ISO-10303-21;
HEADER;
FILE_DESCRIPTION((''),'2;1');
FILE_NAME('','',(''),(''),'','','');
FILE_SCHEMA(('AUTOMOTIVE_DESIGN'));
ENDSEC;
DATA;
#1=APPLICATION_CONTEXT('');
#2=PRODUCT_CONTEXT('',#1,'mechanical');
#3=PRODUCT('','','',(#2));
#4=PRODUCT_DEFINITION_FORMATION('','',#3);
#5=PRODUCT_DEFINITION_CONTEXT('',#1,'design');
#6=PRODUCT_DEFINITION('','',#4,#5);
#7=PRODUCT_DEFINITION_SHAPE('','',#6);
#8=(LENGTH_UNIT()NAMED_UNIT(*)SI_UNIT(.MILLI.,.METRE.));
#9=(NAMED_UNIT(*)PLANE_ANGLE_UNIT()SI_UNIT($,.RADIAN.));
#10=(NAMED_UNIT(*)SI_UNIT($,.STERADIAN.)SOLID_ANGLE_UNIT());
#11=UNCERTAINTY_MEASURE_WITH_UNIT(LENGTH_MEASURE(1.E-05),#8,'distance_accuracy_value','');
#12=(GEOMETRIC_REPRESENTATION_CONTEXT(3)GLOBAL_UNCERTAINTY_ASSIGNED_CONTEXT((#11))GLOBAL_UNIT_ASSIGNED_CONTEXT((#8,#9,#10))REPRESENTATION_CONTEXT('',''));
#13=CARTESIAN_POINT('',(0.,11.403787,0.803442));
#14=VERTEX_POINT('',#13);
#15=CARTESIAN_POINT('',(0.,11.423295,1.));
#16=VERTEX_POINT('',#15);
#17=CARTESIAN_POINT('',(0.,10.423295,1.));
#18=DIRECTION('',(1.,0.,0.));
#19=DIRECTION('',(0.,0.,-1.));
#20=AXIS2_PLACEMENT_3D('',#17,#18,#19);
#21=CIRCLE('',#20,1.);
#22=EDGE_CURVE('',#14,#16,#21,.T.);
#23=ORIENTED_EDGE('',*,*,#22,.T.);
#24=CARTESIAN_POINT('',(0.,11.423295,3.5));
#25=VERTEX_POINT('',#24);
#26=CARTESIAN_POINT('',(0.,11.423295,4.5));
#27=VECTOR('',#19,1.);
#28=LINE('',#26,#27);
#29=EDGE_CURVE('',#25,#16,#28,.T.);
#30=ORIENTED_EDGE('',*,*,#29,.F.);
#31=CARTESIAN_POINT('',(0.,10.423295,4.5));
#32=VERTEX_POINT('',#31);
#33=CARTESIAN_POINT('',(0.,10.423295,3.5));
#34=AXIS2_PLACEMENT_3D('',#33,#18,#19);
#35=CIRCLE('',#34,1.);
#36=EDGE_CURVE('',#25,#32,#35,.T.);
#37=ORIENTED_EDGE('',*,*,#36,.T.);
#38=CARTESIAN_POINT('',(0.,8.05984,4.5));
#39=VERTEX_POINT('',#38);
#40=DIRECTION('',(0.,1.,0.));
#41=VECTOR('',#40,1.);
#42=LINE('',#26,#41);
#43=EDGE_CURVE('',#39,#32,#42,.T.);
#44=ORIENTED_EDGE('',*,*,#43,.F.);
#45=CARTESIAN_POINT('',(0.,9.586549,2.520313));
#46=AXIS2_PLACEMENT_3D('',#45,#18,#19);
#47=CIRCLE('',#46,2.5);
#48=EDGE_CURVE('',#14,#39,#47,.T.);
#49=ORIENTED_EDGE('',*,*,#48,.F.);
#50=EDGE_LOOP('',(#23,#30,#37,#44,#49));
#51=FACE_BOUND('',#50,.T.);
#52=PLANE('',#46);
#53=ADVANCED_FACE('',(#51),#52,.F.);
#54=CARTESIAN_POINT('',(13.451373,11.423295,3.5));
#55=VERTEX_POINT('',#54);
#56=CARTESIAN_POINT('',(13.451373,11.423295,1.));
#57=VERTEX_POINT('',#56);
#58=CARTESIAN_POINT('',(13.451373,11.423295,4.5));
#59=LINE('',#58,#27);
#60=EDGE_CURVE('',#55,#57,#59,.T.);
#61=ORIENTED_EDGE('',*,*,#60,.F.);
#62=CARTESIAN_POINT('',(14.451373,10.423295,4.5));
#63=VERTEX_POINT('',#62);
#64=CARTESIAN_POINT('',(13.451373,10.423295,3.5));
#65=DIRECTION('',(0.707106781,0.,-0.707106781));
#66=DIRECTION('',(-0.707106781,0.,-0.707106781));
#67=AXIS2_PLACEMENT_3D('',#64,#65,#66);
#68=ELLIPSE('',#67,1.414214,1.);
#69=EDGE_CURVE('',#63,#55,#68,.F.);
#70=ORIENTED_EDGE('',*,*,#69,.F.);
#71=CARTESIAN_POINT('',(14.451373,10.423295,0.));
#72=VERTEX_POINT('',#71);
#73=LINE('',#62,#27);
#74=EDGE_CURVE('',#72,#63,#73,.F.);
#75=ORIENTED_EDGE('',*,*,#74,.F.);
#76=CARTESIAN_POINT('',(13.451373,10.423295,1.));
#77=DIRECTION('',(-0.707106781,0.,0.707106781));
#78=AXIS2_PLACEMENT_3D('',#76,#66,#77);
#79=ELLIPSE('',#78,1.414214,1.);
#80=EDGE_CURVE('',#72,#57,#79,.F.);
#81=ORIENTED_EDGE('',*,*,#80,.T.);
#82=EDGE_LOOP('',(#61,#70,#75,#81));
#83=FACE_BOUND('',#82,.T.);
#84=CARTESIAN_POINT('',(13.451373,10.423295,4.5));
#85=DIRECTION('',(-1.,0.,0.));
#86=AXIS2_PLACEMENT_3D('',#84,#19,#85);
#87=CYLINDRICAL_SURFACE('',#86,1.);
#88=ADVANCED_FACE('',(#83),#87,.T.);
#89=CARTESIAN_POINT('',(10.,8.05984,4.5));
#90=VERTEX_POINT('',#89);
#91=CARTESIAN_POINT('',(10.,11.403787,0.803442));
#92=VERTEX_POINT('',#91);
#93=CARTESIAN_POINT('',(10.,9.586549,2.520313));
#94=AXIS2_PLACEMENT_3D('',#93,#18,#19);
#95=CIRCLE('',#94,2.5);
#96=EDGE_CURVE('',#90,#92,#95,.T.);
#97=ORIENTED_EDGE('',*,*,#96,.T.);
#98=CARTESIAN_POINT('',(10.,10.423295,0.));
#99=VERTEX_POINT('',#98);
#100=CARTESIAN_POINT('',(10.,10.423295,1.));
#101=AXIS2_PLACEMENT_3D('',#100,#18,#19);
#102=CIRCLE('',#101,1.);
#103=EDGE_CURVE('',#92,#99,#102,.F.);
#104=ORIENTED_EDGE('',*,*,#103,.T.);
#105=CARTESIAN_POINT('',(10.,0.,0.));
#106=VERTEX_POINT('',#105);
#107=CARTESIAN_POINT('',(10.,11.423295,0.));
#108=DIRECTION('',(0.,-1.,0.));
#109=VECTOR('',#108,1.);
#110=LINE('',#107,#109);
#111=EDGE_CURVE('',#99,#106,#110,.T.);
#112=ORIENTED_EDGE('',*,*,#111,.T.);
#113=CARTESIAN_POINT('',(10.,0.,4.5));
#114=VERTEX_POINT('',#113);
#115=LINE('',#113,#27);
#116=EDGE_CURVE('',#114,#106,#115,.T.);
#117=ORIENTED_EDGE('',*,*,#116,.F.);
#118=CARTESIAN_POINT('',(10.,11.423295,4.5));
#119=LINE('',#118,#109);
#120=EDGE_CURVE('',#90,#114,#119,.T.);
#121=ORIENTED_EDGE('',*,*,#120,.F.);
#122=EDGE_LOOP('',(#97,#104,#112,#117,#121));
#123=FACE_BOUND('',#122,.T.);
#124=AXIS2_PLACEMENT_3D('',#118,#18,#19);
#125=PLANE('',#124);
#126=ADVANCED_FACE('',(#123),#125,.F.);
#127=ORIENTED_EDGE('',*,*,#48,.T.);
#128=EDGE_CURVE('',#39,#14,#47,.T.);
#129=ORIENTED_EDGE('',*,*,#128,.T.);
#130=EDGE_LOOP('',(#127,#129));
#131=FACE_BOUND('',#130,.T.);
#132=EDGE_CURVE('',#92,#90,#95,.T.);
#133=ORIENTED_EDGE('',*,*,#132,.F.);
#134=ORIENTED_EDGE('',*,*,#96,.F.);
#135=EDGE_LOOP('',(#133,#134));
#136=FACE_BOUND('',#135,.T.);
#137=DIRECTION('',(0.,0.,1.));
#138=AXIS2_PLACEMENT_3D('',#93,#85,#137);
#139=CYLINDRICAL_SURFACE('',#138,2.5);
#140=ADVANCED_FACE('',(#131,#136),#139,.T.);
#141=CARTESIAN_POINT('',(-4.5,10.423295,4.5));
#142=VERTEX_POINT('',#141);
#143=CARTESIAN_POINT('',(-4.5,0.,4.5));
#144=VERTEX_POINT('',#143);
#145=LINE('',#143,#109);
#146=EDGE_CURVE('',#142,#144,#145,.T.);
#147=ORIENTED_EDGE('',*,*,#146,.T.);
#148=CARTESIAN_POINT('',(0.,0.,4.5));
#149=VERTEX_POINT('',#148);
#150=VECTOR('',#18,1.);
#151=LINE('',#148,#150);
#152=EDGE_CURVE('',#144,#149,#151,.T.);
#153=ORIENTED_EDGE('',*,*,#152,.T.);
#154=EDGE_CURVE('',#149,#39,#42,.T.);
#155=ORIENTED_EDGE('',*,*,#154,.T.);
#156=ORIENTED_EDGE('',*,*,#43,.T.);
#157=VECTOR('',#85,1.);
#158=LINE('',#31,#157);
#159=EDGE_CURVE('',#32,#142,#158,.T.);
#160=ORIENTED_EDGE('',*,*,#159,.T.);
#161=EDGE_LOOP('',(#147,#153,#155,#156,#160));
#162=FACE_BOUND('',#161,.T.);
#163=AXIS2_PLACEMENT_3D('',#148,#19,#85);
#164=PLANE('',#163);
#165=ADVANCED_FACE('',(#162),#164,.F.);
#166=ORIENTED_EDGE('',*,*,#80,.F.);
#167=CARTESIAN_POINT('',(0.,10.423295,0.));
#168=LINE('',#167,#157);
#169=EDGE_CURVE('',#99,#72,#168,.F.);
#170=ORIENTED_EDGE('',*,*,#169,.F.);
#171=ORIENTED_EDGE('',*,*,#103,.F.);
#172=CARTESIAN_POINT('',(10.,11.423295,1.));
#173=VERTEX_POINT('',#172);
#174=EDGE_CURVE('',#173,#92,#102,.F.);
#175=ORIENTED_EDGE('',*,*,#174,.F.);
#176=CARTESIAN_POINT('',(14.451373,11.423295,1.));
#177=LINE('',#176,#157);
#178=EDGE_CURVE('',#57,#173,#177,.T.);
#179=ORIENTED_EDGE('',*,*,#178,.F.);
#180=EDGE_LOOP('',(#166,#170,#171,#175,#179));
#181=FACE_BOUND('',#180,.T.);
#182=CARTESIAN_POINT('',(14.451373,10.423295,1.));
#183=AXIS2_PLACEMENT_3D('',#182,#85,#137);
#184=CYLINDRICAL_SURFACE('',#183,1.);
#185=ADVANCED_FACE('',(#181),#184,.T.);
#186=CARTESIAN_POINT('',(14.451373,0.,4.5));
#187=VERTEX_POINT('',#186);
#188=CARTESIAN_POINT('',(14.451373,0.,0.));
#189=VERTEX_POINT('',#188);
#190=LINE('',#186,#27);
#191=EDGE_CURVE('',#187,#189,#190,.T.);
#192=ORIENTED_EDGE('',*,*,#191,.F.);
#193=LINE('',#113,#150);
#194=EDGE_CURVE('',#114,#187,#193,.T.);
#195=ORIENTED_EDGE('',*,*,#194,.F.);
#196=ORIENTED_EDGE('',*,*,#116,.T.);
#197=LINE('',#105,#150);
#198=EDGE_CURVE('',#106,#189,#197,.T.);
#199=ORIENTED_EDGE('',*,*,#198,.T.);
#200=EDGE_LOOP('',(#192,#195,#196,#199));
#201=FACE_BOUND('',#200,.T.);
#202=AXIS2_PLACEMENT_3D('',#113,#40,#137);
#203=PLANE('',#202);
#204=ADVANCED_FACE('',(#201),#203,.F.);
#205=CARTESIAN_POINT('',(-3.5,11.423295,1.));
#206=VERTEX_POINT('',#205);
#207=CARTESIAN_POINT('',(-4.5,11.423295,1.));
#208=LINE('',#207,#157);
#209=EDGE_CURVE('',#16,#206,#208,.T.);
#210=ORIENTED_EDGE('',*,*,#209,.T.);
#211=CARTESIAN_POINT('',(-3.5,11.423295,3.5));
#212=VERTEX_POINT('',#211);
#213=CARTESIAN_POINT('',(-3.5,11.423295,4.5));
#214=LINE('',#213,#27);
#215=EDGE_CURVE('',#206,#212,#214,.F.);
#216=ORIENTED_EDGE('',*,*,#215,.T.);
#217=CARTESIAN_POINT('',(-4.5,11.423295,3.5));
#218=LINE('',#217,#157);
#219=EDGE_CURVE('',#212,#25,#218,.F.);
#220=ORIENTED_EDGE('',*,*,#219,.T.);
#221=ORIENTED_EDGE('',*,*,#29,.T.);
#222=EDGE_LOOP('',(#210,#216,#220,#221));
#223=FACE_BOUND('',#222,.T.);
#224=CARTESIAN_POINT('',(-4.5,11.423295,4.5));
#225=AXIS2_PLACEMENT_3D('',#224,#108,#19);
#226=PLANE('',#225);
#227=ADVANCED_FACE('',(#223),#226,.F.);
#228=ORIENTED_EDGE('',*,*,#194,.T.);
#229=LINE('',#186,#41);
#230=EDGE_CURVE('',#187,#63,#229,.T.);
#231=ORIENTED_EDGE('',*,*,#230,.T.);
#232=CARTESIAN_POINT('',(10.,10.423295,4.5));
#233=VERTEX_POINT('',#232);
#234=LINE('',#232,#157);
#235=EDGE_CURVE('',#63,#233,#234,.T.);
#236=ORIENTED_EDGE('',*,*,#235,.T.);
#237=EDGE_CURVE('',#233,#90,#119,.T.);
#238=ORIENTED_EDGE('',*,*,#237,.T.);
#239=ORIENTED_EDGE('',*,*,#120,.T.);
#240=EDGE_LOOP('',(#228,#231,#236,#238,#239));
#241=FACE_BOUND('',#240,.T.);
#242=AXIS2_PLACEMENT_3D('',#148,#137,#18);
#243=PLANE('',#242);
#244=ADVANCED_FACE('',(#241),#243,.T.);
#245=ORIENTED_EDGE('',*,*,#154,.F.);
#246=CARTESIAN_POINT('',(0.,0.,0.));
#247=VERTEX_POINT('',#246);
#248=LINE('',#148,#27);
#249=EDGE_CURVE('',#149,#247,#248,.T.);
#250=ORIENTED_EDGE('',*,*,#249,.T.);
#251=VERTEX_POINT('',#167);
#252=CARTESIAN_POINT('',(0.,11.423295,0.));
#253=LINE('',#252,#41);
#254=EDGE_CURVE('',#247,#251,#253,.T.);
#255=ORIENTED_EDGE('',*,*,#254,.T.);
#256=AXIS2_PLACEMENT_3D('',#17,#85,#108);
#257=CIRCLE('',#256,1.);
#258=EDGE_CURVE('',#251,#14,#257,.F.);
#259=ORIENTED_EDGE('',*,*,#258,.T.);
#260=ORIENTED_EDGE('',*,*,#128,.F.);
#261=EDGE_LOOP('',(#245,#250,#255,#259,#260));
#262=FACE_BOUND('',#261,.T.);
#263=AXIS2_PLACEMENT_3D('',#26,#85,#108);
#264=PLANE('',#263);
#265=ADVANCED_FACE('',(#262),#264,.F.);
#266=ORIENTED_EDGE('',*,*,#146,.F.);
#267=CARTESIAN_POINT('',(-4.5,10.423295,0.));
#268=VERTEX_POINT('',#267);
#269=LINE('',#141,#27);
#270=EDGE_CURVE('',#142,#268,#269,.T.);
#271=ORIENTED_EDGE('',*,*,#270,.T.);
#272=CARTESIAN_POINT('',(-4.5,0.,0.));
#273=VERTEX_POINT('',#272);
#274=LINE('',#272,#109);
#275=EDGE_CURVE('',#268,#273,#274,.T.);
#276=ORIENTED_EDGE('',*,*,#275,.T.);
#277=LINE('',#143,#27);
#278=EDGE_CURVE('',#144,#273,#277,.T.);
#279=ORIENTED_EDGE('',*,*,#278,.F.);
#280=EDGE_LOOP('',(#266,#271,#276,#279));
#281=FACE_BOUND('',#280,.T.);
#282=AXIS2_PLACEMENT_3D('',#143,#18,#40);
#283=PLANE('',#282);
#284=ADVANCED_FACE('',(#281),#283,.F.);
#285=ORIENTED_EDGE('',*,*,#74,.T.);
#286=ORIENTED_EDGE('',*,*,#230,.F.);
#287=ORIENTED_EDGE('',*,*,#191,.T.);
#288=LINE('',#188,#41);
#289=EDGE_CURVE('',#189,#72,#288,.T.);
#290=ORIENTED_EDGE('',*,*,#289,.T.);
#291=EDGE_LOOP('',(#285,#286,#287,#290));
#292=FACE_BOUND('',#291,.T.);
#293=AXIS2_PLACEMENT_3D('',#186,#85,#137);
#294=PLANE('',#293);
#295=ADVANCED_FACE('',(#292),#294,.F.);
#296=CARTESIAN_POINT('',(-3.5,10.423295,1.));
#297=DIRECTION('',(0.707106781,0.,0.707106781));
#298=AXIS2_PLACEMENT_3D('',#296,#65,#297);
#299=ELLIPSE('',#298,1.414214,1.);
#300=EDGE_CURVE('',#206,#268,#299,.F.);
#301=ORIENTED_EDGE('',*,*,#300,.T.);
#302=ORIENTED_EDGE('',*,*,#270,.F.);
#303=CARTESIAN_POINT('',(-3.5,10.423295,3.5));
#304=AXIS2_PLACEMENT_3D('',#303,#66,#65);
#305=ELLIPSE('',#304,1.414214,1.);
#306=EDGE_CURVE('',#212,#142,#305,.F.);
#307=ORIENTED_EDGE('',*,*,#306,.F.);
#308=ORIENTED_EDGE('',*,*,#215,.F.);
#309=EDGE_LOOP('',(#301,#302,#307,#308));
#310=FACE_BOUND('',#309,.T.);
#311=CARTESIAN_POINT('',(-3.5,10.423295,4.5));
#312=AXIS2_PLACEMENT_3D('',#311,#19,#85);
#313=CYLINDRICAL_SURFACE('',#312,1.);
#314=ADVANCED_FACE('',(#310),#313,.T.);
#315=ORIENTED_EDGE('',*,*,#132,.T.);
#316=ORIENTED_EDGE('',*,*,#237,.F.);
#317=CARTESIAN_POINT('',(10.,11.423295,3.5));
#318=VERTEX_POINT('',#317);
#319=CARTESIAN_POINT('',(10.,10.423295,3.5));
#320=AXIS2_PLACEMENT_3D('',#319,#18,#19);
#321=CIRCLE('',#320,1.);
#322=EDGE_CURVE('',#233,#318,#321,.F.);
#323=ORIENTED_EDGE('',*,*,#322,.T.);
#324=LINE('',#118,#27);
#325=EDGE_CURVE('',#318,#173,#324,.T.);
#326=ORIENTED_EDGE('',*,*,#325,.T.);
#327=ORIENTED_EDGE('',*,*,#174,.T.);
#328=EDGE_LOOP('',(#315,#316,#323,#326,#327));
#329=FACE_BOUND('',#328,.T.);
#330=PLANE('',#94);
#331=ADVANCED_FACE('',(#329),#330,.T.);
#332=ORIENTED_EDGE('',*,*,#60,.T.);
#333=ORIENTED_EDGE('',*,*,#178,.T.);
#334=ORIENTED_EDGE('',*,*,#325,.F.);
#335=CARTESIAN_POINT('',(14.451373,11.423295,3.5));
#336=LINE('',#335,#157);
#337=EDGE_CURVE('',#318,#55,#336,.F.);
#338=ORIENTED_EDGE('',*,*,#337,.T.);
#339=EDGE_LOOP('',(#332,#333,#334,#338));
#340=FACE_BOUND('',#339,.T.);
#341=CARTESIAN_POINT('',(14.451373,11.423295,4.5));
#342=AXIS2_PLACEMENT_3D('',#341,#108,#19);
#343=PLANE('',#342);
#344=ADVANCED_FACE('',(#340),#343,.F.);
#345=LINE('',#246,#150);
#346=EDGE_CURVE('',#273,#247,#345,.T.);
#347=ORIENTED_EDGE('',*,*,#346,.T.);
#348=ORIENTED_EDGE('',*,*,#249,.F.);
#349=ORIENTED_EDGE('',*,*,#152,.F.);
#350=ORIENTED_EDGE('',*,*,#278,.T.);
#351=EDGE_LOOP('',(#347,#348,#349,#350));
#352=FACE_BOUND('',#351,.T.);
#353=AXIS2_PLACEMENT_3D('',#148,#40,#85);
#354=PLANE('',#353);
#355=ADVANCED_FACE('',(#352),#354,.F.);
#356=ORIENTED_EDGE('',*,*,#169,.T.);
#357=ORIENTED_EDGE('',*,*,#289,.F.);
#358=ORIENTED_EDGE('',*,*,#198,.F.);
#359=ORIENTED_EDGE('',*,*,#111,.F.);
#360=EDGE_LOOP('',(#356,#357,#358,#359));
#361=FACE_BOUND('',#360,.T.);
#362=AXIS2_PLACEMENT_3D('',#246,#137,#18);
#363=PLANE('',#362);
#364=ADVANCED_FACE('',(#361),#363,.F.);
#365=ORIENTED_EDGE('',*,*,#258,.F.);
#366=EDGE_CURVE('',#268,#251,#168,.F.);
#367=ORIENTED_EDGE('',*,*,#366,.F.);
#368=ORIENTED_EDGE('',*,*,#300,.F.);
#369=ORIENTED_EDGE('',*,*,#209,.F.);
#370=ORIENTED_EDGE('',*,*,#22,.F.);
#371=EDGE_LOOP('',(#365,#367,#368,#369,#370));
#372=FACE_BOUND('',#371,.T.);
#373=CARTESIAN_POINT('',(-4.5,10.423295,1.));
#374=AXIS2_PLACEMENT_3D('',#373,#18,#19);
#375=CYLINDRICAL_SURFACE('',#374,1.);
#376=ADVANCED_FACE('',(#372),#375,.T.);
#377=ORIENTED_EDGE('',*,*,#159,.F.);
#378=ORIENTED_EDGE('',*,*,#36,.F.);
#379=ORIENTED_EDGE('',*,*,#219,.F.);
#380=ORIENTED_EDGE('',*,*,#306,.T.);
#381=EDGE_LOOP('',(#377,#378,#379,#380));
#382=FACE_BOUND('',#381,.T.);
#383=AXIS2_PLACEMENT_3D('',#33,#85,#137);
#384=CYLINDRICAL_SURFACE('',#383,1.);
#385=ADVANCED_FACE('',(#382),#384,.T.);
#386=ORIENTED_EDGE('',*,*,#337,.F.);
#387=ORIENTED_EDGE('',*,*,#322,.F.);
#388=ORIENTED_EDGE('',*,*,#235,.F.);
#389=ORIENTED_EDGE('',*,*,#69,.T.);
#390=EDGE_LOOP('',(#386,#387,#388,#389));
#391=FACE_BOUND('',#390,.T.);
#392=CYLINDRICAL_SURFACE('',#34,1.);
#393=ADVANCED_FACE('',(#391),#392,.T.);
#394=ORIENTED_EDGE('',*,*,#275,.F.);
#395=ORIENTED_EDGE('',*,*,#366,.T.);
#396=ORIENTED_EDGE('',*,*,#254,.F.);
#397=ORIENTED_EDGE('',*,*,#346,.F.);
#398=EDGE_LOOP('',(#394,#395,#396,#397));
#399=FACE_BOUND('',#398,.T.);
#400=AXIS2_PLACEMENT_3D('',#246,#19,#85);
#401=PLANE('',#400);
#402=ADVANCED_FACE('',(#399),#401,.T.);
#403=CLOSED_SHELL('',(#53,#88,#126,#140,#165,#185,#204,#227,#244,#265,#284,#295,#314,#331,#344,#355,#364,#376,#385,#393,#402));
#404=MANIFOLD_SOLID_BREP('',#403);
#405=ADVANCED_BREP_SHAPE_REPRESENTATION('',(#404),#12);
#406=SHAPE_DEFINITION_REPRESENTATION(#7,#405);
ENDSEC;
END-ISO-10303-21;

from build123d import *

# Parameters (mm, degrees)
SKIZZE1_W                         = 4.5
SKIZZE1_H                         = 11.423295
AUFSATZ_LINEAR_AUSTRAGEN1_DEPTH   = 4.5
SKIZZE1_W_2                       = 4.451373
AUFSATZ_LINEAR_AUSTRAGEN1_2_DEPTH = 4.5
SKIZZE2_R                         = 2.5
AUFSATZ_LINEAR_AUSTRAGEN2_DEPTH   = 10
VERRUNDUNG4_R                     = 1


with BuildPart() as part:
    # Skizze1 → Aufsatz-Linear austragen1 (new body)
    with BuildSketch(Plane.XY):
        with Locations((-2.25, 5.7116475)):
            Rectangle(SKIZZE1_W, SKIZZE1_H)
    extrude(amount=AUFSATZ_LINEAR_AUSTRAGEN1_DEPTH)



with BuildPart() as body_2:
    # Skizze1 → Aufsatz-Linear austragen1 2 (new body)
    with BuildSketch(Plane.XY):
        with Locations((12.2256865, 5.7116475)):
            Rectangle(SKIZZE1_W_2, SKIZZE1_H)
    extrude(amount=AUFSATZ_LINEAR_AUSTRAGEN1_2_DEPTH)


with BuildPart() as part_1:
    add(part.part)

    add(body_2.part)  # Aufsatz-Linear austragen2 merges body 2
    # Skizze2 → Aufsatz-Linear austragen2 (add)
    with BuildSketch(Plane(origin=(0, 0, 0), x_dir=(0, 0, -1), z_dir=(1, 0, 0))):
        with Locations(Location((-2.520313205, 9.586549386, 0), (0, 0, 217.638946457))):
            Circle(SKIZZE2_R)
    extrude(amount=AUFSATZ_LINEAR_AUSTRAGEN2_DEPTH)

    # Verrundung4
    # the kernel refuses this fillet: 1 mm, written as the material it takes off along each edge
    with BuildSketch(Plane(origin=(16.951373, 11.423295, 0), x_dir=(0, 0, 1), z_dir=(-1, 0, 0)), Plane(origin=(16.951373, 11.423295, 4.5), x_dir=(0, -1, 0), z_dir=(-1, 0, 0))) as verrundung4_piece_1:
        with BuildLine():
            CenterArc((VERRUNDUNG4_R, -VERRUNDUNG4_R), VERRUNDUNG4_R, 90, 90)
            Line((0, -VERRUNDUNG4_R), (0, 0))
            Line((0, 0), (VERRUNDUNG4_R, 0))
        make_face()
    extrude(amount=6.951373, mode=Mode.SUBTRACT)
    with BuildSketch(Plane(origin=(14.451373, 11.423295, -2.5), x_dir=(-1, 0, 0), z_dir=(0, 0, 1)), Plane(origin=(-4.5, 11.423295, -2.5), x_dir=(0, -1, 0), z_dir=(0, 0, 1))) as verrundung4_piece_2:
        with BuildLine():
            CenterArc((VERRUNDUNG4_R, VERRUNDUNG4_R), VERRUNDUNG4_R, 180, 90)
            Line((0, VERRUNDUNG4_R), (0, 0))
            Line((0, 0), (VERRUNDUNG4_R, 0))
        make_face()
    extrude(amount=9.5, mode=Mode.SUBTRACT)
    with BuildSketch(Plane(origin=(-7, 11.423295, 0), x_dir=(0, -1, 0), z_dir=(1, 0, 0))) as verrundung4_piece_3:
        with BuildLine():
            CenterArc((VERRUNDUNG4_R, -VERRUNDUNG4_R), VERRUNDUNG4_R, 90, 90)
            Line((0, -VERRUNDUNG4_R), (0, 0))
            Line((0, 0), (VERRUNDUNG4_R, 0))
        make_face()
    extrude(amount=7, mode=Mode.SUBTRACT)
    with BuildSketch(Plane(origin=(-7, 11.423295, 4.5), x_dir=(0, -1, 0), z_dir=(1, 0, 0))) as verrundung4_piece_4:
        with BuildLine():
            CenterArc((VERRUNDUNG4_R, VERRUNDUNG4_R), VERRUNDUNG4_R, 180, 90)
            Line((0, VERRUNDUNG4_R), (0, 0))
            Line((0, 0), (VERRUNDUNG4_R, 0))
        make_face()
    extrude(amount=7, mode=Mode.SUBTRACT)


solid = part_1.part
